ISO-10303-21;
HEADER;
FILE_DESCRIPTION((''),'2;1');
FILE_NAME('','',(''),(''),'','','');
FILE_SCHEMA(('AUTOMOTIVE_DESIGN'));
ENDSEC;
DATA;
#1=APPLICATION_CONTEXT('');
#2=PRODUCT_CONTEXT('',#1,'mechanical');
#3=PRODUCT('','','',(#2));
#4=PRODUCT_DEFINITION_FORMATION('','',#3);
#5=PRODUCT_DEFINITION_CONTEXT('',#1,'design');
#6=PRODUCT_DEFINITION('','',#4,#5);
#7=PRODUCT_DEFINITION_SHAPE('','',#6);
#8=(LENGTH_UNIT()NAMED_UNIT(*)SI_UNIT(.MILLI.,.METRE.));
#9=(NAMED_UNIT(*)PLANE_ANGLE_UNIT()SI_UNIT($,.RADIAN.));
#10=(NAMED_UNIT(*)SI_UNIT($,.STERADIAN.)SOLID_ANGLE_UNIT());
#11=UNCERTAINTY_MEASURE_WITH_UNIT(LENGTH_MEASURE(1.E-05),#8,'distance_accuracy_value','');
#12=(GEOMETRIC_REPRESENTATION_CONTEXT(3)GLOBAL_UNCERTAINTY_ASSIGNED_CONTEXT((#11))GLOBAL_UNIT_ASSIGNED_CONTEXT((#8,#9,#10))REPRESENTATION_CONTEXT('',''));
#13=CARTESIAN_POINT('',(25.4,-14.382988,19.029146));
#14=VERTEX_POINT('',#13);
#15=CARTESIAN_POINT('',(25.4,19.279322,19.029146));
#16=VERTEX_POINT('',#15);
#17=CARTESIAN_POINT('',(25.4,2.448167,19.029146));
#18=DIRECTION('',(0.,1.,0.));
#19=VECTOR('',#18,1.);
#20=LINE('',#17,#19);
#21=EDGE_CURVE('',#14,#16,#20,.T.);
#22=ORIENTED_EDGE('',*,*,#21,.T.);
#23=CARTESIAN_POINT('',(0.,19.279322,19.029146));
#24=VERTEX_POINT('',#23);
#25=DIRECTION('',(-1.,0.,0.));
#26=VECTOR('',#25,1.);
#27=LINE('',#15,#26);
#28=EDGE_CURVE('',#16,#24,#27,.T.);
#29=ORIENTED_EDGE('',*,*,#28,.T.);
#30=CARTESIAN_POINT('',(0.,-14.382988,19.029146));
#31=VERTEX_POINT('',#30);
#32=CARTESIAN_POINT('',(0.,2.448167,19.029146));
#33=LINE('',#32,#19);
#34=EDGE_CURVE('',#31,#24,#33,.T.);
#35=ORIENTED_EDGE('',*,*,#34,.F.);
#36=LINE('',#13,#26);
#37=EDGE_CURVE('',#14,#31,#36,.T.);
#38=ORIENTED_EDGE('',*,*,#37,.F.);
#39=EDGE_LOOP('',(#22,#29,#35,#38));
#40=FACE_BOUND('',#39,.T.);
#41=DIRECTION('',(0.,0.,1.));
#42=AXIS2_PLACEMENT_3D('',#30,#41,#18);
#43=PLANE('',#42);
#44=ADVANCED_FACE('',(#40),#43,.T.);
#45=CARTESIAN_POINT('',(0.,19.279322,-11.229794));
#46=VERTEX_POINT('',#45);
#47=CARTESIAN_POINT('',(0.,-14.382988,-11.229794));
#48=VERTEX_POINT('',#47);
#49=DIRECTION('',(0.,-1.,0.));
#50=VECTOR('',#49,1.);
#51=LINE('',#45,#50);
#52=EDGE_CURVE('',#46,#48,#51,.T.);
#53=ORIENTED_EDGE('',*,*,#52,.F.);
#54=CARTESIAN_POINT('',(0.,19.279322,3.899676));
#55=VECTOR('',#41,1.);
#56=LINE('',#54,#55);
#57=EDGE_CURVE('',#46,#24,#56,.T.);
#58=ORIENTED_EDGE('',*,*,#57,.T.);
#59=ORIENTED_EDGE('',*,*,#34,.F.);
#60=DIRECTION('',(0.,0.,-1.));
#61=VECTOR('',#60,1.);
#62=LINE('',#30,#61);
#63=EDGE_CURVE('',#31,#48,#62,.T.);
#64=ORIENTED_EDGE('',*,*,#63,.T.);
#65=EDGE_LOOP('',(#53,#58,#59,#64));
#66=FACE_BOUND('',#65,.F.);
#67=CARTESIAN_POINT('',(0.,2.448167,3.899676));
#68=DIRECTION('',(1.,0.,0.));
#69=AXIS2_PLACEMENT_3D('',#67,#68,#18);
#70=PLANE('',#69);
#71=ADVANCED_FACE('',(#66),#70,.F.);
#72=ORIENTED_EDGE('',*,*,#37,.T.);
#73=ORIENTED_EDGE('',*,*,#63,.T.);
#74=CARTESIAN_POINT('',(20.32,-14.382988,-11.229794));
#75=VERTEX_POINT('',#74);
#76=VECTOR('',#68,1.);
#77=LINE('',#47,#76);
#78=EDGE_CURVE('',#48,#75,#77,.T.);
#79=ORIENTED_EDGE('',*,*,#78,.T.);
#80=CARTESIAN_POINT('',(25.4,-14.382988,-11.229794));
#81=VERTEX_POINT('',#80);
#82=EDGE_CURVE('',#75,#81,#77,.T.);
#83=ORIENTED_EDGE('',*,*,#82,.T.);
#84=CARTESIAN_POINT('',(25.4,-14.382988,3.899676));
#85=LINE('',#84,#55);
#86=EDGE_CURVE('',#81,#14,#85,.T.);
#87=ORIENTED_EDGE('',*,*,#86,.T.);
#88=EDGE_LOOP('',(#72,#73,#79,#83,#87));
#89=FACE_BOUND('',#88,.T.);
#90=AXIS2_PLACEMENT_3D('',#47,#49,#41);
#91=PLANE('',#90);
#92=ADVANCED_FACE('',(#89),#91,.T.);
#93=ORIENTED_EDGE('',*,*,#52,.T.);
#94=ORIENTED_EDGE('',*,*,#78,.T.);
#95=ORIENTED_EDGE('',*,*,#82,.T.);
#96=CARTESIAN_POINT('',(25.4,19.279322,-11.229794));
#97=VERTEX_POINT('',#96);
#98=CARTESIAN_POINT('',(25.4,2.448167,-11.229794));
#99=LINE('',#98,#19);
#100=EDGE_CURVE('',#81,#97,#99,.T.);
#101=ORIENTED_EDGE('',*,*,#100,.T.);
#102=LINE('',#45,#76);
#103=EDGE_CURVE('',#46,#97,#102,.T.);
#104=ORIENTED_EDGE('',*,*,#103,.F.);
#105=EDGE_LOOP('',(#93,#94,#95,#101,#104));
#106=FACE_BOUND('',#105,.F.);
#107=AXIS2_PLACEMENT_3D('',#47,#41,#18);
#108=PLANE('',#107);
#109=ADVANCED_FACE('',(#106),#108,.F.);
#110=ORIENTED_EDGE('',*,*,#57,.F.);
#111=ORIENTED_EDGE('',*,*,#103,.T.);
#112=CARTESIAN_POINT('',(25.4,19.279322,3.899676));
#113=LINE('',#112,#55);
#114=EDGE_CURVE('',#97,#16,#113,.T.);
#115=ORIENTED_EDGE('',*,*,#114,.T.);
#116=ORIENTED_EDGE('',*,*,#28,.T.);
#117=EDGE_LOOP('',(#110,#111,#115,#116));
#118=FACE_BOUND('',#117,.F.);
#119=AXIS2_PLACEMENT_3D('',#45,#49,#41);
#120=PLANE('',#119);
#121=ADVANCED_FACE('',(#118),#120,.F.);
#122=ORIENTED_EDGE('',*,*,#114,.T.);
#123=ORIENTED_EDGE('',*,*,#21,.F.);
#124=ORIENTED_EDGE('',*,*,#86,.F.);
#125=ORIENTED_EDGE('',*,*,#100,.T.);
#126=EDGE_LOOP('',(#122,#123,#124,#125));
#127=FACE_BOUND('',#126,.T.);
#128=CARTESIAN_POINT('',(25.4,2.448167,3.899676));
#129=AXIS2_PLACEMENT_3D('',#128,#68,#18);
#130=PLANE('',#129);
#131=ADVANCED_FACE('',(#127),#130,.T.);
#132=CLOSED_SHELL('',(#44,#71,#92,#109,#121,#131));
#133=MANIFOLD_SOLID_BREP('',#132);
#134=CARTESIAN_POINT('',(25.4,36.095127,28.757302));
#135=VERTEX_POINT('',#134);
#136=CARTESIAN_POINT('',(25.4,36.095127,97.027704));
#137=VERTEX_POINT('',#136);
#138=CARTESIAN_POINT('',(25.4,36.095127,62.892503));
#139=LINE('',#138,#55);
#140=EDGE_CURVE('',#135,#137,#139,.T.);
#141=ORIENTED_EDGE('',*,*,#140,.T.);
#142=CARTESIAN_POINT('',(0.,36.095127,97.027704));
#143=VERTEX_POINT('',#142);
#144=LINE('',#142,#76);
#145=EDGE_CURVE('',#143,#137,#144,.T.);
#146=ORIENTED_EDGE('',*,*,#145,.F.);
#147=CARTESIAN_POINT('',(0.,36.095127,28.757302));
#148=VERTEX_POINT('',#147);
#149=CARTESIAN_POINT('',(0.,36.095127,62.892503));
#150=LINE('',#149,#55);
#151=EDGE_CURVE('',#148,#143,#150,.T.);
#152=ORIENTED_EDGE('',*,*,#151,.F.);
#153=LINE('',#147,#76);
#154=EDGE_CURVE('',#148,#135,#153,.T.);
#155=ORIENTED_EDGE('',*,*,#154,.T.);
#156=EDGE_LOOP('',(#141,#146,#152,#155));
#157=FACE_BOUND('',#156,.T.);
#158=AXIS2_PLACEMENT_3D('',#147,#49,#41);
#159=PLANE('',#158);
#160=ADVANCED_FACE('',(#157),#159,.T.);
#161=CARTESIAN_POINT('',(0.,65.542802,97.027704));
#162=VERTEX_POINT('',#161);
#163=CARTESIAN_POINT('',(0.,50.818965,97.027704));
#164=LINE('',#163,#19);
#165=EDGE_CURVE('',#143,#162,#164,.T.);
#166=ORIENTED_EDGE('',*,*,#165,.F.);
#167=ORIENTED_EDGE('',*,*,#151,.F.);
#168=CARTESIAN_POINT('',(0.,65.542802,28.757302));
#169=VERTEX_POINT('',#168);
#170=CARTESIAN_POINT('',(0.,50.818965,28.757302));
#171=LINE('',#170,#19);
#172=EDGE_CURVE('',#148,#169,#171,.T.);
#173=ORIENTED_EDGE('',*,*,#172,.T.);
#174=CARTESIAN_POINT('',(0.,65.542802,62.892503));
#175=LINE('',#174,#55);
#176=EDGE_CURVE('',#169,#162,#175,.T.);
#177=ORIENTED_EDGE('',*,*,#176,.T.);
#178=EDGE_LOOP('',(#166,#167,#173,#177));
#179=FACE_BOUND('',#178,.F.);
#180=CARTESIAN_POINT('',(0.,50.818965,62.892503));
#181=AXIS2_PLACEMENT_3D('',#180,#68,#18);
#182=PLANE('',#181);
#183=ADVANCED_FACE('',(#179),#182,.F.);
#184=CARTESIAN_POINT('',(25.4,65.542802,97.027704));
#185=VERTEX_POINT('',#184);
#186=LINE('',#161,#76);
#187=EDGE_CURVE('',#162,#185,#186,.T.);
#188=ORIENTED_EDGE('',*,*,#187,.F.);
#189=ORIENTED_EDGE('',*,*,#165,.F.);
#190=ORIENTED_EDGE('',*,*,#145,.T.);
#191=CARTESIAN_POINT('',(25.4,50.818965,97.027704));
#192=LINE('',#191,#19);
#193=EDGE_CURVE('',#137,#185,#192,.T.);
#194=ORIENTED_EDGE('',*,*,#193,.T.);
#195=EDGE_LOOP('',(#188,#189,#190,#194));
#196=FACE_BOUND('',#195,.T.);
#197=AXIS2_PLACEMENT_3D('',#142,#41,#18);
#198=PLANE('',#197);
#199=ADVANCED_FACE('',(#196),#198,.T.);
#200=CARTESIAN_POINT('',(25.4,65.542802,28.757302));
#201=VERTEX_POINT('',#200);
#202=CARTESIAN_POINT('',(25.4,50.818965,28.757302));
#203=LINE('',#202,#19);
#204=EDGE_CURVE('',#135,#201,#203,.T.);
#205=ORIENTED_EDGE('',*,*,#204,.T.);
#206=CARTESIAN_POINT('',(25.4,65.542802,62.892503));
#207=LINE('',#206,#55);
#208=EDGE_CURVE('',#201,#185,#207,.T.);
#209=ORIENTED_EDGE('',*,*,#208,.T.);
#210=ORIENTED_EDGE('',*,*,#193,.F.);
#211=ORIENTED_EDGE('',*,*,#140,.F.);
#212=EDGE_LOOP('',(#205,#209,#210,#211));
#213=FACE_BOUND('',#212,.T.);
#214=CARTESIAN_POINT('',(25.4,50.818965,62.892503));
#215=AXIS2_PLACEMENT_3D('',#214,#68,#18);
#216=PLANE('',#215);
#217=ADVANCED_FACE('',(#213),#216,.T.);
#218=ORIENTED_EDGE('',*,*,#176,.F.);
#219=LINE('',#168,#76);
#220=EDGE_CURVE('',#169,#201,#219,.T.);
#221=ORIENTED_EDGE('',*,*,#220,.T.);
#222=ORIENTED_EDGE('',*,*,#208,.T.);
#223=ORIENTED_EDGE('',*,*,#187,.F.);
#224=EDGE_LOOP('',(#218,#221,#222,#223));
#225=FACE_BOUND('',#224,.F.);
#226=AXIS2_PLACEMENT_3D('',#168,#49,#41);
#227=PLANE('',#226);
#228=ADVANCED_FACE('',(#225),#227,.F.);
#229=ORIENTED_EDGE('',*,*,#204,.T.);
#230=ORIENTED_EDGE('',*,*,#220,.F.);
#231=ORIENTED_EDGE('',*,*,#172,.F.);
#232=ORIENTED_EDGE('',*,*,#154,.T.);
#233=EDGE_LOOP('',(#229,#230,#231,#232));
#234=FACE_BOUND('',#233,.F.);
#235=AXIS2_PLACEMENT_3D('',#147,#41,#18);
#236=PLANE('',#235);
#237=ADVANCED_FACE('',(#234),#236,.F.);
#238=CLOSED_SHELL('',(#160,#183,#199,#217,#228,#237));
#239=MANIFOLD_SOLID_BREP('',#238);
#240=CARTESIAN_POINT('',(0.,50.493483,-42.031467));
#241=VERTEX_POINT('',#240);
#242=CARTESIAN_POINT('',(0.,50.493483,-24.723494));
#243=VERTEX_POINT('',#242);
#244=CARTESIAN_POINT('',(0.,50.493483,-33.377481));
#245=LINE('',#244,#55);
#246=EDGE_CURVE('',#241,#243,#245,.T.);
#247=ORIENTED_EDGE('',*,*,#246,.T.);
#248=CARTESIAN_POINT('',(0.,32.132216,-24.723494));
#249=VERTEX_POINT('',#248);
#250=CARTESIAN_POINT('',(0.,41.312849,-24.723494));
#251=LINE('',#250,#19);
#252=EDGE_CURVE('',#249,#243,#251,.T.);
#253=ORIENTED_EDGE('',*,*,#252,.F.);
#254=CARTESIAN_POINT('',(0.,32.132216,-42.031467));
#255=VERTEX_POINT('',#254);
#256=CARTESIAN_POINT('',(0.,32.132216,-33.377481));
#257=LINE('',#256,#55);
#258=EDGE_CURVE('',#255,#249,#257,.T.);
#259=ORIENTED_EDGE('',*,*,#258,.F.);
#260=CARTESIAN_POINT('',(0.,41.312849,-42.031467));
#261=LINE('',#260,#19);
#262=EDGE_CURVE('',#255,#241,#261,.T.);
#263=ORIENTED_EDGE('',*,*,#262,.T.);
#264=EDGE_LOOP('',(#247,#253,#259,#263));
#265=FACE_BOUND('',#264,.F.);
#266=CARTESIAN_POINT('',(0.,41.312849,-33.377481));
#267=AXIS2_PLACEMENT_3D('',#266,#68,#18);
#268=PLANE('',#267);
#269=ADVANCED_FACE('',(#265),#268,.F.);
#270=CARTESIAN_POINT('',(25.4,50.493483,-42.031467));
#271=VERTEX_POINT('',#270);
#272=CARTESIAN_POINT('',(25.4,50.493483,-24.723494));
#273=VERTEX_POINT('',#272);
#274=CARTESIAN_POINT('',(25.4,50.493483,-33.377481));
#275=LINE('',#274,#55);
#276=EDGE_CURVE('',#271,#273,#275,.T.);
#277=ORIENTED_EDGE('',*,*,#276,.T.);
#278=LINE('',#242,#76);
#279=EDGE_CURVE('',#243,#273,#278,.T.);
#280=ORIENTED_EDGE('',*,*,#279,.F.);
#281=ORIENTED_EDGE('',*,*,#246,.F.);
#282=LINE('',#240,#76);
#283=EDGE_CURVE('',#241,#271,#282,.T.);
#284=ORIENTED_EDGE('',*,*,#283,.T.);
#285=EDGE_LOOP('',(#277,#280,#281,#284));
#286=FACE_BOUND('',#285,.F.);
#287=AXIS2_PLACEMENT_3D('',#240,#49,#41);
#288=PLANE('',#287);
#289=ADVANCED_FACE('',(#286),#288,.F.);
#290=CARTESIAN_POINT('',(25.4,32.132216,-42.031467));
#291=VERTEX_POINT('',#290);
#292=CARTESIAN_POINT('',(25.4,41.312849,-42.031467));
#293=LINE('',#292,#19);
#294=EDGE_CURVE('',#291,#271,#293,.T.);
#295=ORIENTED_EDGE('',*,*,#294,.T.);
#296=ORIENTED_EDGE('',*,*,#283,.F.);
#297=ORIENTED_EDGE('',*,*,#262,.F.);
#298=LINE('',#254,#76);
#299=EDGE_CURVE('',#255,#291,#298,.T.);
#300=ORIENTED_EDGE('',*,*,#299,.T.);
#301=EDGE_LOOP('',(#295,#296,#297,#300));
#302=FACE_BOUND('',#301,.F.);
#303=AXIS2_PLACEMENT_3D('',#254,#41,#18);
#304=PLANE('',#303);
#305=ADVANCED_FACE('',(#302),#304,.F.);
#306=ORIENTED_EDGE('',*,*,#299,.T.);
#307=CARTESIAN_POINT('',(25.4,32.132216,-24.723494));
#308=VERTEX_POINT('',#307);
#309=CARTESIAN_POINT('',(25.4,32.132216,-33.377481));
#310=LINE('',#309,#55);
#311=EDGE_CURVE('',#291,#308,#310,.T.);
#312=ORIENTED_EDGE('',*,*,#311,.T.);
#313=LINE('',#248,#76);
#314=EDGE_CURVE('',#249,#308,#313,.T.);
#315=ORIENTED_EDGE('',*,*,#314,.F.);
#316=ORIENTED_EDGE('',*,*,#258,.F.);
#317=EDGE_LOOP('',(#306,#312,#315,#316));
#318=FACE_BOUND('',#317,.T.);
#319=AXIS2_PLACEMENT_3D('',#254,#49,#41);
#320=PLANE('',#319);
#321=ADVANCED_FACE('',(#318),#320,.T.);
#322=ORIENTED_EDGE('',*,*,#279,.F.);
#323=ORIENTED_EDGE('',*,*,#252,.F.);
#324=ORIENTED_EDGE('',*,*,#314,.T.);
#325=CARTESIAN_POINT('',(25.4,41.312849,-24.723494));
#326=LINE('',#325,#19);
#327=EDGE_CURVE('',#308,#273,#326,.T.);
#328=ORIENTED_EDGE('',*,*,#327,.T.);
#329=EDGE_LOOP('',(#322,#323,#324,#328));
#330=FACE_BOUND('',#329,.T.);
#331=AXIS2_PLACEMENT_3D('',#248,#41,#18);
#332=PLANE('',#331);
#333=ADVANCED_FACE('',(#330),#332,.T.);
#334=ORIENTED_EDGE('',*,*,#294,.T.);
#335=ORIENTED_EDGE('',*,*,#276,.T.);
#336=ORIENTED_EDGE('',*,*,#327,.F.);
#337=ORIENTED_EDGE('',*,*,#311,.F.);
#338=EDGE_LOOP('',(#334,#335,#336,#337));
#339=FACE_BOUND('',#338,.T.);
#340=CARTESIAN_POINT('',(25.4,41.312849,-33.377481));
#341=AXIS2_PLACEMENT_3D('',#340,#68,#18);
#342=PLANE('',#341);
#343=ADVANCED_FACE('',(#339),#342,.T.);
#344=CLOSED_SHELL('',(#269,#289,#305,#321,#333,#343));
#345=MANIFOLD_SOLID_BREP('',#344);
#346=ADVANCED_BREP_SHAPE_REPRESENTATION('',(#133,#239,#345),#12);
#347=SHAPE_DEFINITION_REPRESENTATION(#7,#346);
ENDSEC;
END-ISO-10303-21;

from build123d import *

# Parameters (mm, degrees)
F0_W     = 33.6623098701
F0_H     = 30.2589405328
F1_DEPTH = 25.4
F2_R     = 5.08
F3_T     = 2.54
F4_DEPTH = 25.4
F0_W_2   = 18.3612667024
F0_H_2   = 17.3079725355
F0_W_3   = 29.4476747513
F0_H_3   = 68.2704020292


# Not quite as in the source:
# - a shell that OpenCascade refuses in one call is made with other operations: the cavity is built on its own and cut out


with BuildPart() as f1:
    # F0 (on Right) → F1 (new body)
    with BuildSketch(Plane.YZ):
        with Locations((2.4481667206, 3.8996757939)):
            Rectangle(F0_W, F0_H)
    extrude(amount=F1_DEPTH)

    # F2
    f2_edges = [f1.edges().sort_by_distance(p)[0] for p in [
        (25.4, 2.448167, 19.029146),
        (25.4, -14.382988, 3.899676),
        (25.4, 2.448167, -11.229794),
        (25.4, 19.279322, 3.899676),
    ]]
    fillet(f2_edges, radius=F2_R)

    # F3: shell of thickness 2.54, made by hand


with BuildPart() as f3_core1:
    # F3_t2: copy of F1
    add(f1.part)

    # the walls: a layer under each face that stays
    f3_faces = [f3_core1.faces().sort_by_distance(p)[0] for p in [
        (10.16, 2.4481667206, 19.0291460603),
        (10.16, 19.2793216556, 3.8996757939),
        (23.9121024849, 2.4481667206, 17.5412484723),
        (23.9121024484, 17.7914241041, 3.8996757939),
        (23.9121024849, 2.4481667206, -9.7418968844),
    ]]
    thicken(f3_faces, amount=-F3_T, mode=Mode.SUBTRACT)


with BuildPart() as f1_1:
    add(f1.part)

    # what is left inside the walls is the cavity
    f3_cavity = [f3_core1.part.solids().sort_by_distance(p)[0] for p in [
        (0.0254, 1.178167, -1.990148),
    ]]
    add(f3_cavity, mode=Mode.SUBTRACT)

    # F0 (on Right) → F4 (join)
    with BuildSketch(Plane.YZ):
        with Locations((2.4481667206, 3.8996757939)):
            Rectangle(F0_W, F0_H)
    extrude(amount=F4_DEPTH)


with BuildPart() as f4:
    # F0 (on Right) → F4, piece 2 (new body)
    with BuildSketch(Plane.YZ):
        with Locations((41.3128491491, -33.3774806932)):
            Rectangle(F0_W_2, F0_H_2)
    extrude(amount=F4_DEPTH)


with BuildPart() as f4b:
    # F0 (on Right) → F4, piece 3 (new body)
    with BuildSketch(Plane.YZ):
        with Locations((50.818964839, 62.8925031051)):
            Rectangle(F0_W_3, F0_H_3)
    extrude(amount=F4_DEPTH)


solid = Compound([f1_1.part, f4.part, f4b.part])
